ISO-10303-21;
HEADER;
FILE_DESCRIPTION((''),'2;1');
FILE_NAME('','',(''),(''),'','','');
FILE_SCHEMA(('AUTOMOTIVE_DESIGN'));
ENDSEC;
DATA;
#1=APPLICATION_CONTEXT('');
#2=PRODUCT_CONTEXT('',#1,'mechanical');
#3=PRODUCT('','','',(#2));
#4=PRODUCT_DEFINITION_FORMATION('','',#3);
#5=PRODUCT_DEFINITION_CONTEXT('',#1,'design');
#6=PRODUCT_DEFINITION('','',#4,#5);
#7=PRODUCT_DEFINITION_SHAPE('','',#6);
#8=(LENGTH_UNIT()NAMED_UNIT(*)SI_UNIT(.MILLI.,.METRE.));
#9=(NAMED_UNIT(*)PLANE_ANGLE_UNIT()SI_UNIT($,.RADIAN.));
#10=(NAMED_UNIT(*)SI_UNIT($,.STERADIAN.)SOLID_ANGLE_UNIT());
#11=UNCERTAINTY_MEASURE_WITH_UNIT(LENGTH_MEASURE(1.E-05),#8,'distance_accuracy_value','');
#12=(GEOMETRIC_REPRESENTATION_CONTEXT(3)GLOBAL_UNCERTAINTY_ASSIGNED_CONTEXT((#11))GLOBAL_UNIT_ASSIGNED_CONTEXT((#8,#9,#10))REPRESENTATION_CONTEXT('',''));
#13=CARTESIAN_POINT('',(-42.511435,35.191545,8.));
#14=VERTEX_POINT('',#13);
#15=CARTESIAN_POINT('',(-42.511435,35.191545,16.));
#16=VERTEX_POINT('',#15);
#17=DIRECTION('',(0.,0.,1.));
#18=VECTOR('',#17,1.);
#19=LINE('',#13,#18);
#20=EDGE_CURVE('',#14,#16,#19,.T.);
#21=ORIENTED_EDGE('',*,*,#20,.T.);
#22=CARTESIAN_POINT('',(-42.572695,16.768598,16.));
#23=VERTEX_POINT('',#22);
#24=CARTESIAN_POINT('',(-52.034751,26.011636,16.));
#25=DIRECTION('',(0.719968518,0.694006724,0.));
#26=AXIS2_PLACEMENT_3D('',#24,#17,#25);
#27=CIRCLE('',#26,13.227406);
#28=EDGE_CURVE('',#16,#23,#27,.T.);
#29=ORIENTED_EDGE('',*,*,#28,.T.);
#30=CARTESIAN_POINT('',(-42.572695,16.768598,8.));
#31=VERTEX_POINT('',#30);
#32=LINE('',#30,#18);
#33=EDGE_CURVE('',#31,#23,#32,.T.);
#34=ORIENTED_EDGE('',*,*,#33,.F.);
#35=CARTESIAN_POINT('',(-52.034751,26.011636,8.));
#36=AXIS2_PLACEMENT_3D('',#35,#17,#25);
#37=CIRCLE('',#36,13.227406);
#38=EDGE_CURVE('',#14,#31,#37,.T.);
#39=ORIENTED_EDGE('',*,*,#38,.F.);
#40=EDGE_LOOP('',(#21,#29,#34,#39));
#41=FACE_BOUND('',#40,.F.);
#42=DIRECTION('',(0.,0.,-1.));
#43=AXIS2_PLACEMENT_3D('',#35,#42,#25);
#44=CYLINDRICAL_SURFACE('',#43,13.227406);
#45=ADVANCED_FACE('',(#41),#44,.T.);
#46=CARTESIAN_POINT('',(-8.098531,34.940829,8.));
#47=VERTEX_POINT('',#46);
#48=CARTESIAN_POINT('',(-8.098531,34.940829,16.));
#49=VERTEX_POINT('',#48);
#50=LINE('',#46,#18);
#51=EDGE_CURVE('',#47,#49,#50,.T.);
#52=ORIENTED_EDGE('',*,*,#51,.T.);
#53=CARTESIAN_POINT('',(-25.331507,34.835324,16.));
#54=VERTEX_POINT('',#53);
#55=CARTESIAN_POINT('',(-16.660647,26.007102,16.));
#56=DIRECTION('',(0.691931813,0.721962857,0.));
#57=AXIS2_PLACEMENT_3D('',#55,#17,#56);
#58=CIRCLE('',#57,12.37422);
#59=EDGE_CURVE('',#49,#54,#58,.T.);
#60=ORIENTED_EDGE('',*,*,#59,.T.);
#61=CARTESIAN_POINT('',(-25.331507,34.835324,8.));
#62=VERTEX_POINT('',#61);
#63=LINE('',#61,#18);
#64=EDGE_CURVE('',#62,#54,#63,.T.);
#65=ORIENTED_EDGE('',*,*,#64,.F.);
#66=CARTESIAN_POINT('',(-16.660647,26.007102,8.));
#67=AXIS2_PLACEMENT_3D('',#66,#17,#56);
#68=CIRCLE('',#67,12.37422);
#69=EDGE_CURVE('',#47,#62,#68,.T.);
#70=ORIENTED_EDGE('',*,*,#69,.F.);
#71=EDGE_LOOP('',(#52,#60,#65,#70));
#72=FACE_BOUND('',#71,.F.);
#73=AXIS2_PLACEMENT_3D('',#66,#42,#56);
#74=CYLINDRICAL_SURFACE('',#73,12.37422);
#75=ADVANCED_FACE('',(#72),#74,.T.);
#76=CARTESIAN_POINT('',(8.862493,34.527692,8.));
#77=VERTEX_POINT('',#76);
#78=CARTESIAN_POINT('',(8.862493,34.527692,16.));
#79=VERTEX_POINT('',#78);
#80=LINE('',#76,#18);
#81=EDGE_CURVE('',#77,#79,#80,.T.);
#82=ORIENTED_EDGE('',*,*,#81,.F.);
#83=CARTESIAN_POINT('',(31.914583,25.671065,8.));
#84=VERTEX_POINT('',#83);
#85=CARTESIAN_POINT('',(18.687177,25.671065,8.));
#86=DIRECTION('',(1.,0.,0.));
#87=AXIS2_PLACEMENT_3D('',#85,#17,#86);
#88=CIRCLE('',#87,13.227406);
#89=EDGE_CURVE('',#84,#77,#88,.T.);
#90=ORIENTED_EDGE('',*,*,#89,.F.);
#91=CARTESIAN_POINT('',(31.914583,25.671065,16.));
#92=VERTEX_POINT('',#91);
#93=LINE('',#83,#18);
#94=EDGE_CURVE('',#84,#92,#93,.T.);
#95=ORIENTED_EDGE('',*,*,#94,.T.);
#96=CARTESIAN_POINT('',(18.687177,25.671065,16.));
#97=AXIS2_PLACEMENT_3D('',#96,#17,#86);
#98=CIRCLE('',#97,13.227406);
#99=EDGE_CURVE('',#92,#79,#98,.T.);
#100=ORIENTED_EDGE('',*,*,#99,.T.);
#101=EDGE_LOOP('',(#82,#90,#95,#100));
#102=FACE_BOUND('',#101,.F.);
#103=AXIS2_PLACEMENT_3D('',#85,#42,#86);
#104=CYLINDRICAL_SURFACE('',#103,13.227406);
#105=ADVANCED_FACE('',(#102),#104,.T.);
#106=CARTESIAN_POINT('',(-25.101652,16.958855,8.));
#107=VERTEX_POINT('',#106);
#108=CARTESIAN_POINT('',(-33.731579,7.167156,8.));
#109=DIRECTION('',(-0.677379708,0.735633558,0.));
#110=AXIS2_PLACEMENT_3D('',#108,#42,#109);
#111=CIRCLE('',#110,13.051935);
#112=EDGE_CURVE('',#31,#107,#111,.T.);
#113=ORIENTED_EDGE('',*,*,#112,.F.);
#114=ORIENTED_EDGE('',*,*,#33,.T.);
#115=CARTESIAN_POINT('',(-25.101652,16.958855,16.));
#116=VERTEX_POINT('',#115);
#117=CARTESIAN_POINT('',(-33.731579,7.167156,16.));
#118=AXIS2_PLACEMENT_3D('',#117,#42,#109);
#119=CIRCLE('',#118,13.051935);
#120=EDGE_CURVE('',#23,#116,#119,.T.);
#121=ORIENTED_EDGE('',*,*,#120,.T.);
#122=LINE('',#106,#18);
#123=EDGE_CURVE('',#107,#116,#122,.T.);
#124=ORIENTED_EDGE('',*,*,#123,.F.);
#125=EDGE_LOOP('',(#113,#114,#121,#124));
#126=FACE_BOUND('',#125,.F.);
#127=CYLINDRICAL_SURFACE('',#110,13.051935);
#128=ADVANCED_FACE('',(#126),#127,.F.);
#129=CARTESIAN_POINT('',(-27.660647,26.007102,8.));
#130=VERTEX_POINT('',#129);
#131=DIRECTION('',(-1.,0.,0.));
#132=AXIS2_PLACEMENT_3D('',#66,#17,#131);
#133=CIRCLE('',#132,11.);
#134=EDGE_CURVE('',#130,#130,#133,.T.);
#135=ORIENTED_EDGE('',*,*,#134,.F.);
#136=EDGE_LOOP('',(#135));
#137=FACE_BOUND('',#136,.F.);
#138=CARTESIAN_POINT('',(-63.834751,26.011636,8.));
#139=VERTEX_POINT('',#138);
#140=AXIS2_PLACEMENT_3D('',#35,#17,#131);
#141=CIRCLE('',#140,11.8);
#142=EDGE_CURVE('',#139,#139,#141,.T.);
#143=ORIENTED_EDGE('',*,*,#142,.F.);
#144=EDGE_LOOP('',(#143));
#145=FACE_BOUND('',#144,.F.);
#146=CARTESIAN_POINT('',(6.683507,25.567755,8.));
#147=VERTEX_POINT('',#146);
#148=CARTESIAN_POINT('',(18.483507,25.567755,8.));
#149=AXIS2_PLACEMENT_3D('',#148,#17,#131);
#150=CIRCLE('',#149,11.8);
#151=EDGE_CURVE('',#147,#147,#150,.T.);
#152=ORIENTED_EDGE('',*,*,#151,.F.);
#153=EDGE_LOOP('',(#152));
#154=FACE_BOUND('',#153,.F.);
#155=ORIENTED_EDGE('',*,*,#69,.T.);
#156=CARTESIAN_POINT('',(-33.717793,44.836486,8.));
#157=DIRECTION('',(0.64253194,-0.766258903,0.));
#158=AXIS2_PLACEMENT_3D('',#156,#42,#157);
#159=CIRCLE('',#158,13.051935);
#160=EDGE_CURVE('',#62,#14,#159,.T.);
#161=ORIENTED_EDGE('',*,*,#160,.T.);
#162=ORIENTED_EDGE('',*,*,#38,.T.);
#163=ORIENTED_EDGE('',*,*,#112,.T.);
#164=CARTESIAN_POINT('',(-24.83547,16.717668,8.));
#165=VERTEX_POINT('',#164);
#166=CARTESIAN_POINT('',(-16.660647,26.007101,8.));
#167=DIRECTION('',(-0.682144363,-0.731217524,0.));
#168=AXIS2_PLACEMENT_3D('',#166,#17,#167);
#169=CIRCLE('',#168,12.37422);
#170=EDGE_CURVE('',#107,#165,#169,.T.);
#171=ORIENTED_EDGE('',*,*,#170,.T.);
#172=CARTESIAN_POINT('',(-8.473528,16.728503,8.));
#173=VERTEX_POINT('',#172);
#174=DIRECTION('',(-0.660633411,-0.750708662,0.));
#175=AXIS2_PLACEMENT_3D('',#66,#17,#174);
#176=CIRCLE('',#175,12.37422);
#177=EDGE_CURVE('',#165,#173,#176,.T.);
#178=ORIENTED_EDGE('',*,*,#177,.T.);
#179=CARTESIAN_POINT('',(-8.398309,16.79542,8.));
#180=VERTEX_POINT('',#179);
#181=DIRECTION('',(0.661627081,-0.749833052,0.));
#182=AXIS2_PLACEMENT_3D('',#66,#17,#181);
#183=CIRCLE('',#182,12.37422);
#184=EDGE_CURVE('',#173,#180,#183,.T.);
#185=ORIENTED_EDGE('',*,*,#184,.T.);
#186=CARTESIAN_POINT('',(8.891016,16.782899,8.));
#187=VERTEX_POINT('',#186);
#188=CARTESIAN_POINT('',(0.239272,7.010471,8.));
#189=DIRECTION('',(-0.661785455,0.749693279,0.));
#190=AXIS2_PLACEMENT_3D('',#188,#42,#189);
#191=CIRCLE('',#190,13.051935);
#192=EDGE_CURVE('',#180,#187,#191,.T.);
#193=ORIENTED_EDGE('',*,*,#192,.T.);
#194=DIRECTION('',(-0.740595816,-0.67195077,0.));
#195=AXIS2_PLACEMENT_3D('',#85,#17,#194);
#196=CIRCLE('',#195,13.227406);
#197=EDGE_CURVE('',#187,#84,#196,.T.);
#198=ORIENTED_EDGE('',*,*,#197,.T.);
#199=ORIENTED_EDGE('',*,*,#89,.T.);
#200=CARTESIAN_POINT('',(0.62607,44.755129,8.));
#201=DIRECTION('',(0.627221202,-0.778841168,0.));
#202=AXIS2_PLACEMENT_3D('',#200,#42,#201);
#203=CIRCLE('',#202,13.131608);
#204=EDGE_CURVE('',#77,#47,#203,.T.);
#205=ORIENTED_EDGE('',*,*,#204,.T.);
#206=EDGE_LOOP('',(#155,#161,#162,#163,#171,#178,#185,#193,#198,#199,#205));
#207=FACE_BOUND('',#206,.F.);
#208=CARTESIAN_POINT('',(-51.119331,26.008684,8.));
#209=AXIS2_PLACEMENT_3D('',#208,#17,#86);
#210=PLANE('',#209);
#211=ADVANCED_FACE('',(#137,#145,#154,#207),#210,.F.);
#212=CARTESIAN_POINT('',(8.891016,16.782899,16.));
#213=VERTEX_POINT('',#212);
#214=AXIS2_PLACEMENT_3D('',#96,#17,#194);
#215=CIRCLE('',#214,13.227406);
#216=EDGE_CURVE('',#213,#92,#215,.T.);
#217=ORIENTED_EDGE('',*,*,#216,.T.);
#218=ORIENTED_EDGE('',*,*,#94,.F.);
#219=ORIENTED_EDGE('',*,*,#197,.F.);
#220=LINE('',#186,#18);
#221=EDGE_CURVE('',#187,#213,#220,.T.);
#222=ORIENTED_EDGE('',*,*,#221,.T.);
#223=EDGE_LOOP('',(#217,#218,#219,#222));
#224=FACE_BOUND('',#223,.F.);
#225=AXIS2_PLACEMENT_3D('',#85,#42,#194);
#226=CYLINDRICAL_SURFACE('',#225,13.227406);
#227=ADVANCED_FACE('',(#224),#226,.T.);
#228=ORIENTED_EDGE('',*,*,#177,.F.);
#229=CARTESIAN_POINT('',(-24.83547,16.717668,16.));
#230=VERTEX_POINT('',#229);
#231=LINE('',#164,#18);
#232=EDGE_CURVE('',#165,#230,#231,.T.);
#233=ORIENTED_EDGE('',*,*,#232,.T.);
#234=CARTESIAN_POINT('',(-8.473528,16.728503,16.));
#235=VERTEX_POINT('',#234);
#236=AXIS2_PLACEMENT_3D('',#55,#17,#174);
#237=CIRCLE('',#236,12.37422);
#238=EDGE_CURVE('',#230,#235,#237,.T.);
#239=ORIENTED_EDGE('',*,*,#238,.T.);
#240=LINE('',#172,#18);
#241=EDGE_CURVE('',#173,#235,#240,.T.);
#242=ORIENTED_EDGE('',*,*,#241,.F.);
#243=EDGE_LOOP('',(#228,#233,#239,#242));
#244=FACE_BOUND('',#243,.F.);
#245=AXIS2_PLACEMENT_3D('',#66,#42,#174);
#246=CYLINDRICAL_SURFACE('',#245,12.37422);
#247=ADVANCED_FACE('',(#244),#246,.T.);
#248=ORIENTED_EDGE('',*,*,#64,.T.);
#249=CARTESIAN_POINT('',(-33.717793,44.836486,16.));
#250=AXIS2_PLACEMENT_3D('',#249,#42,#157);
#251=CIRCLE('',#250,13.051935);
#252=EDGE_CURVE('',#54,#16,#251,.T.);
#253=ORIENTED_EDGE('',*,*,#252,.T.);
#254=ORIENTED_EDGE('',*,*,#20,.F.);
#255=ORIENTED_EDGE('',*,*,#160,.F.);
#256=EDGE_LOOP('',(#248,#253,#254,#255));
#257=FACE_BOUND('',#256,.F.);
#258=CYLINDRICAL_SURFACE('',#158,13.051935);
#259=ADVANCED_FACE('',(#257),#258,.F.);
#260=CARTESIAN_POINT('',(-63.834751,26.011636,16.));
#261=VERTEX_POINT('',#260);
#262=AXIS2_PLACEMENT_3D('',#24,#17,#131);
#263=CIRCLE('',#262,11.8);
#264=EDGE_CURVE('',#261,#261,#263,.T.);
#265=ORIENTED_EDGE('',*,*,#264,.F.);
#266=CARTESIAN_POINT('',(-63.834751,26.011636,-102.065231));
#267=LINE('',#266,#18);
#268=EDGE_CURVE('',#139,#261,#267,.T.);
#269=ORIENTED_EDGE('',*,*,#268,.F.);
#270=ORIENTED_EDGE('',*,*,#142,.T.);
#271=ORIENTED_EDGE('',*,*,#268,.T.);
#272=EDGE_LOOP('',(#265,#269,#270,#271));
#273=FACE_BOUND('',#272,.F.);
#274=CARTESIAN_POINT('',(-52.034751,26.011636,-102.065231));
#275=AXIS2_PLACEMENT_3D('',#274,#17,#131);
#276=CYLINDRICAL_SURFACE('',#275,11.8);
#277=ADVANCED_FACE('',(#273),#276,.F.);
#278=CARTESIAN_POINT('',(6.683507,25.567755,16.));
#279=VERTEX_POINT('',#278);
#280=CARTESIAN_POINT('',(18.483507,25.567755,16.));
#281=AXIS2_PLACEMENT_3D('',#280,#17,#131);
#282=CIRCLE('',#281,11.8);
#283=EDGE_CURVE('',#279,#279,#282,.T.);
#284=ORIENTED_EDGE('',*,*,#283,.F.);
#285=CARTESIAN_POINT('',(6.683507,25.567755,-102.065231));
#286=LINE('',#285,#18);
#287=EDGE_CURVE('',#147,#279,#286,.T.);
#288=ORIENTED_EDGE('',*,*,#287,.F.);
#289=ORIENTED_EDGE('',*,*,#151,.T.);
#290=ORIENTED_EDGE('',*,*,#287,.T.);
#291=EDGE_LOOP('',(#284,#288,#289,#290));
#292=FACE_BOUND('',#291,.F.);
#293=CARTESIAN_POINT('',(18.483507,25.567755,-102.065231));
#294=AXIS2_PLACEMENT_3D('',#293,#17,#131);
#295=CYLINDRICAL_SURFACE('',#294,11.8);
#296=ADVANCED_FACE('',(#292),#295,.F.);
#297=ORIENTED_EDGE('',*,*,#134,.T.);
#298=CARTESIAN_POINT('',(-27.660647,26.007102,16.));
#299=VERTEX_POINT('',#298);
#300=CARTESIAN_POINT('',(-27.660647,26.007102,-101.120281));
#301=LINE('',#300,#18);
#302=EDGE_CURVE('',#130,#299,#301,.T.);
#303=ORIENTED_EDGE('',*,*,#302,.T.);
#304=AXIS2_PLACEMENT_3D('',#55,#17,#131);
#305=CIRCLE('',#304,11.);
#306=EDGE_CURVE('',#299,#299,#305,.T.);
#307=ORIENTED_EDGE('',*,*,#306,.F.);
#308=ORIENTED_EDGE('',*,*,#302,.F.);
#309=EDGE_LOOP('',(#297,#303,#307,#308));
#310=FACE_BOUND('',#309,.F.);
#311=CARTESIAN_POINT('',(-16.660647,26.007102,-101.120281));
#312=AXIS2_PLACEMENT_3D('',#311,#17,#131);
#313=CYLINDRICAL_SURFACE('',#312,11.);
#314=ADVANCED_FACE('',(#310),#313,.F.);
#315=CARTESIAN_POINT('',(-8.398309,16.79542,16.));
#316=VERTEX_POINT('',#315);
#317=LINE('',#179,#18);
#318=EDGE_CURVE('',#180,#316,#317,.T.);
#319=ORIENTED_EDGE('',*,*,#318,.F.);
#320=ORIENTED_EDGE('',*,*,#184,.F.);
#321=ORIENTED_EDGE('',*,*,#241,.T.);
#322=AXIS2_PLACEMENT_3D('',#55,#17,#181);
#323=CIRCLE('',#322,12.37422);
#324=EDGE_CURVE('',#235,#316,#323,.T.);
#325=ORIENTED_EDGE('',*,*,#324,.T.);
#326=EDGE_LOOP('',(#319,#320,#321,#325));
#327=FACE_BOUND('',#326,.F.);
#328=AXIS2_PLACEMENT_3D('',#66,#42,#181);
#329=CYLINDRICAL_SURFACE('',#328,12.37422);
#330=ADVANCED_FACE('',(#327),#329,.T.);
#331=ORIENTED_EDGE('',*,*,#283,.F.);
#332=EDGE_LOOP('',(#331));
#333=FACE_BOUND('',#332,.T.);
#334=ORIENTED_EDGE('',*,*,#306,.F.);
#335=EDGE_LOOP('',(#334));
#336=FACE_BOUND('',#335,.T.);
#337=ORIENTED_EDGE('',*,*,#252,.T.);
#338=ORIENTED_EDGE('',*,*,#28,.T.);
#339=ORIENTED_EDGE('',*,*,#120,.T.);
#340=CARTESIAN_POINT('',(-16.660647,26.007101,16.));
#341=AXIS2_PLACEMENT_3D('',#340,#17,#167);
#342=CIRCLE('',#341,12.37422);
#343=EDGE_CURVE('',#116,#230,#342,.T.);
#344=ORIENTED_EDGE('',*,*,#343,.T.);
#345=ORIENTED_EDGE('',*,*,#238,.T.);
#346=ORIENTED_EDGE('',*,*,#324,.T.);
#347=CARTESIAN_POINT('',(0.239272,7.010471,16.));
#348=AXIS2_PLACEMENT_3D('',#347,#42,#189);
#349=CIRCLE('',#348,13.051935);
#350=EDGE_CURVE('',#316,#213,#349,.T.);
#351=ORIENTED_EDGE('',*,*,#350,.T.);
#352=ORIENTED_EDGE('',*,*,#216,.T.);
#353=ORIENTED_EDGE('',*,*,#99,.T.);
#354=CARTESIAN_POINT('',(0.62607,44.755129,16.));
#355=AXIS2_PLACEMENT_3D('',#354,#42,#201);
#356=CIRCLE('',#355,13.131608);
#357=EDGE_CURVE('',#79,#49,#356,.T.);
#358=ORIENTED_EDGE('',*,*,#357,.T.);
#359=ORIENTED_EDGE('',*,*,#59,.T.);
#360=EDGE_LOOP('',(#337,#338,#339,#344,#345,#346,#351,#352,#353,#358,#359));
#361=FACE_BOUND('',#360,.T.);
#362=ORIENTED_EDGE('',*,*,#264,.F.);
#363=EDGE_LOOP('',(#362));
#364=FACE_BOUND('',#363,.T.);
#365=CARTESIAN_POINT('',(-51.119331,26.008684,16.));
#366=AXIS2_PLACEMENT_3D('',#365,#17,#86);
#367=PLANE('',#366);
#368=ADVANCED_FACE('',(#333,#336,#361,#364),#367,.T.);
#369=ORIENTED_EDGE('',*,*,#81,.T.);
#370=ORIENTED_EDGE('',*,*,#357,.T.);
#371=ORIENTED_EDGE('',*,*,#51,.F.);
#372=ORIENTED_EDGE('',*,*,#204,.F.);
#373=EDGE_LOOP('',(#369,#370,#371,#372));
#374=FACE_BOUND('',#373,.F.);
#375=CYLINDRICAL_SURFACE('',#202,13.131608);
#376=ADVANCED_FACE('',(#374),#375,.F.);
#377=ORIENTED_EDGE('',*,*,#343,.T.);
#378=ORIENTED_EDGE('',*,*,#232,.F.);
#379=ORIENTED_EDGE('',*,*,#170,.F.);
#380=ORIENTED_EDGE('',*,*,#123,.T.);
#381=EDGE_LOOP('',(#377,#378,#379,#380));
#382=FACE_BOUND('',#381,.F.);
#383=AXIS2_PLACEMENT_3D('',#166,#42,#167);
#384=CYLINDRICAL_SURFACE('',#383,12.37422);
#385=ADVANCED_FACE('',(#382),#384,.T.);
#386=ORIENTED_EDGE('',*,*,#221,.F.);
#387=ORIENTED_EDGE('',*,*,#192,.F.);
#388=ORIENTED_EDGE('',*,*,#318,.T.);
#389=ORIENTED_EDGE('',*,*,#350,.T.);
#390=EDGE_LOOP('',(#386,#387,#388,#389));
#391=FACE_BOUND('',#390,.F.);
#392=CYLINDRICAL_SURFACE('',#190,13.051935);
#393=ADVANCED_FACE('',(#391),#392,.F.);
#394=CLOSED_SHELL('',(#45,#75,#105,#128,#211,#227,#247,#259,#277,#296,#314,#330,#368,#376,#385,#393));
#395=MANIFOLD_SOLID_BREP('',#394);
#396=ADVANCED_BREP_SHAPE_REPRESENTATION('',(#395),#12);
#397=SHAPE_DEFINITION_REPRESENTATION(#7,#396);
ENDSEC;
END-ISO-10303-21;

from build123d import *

# Parameters (mm, degrees)
F1_DEPTH = 8
F3_DEPTH = 8
F4_D     = 23.6
F5_D     = 22


# Not quite as in the source:
# - a feature names something its author has since deleted; it is built from what else it names


with BuildPart() as f1:
    # F0 (on Top) → F1 (new body)
    with BuildSketch(Plane.XY):
        with BuildLine():
            ThreePointArc((30.2364596242, 25.5677551031), (18.556965651, 37.3204786398), (6.7314716859, 25.7146705041))
            ThreePointArc((6.7314716859, 25.7146705041), (18.4100473802, 13.8150315665), (30.2364596242, 25.5677551031))
        make_face()
    extrude(amount=F1_DEPTH)

    # F2 (on face) → F3 (join)
    with BuildSketch(Plane.XY.offset(8)):
        with BuildLine():
            ThreePointArc((-42.5114348153, 35.1915450581), (-65.2620832709, 26.0556201481), (-42.5726949965, 16.7685975444))
            ThreePointArc((-42.5726949965, 16.7685975444), (-39.7847972392, 21.021355147), (-38.8073447634, 26.0116364807))
            ThreePointArc((-38.8073447634, 26.0116364807), (-39.7682713179, 30.9611567757), (-42.5114348153, 35.1915450581))
        make_face()
        with BuildLine():
            ThreePointArc((-38.8073447634, 26.0116364807), (-39.7847972392, 21.021355147), (-42.5726949965, 16.7685975444))
            ThreePointArc((-42.5726949965, 16.7685975444), (-33.87370444, 20.218317429), (-25.1016516698, 16.9588551759))
            ThreePointArc((-25.1016516698, 16.9588551759), (-29.0338445102, 25.8480071098), (-25.3315074449, 34.8353238892))
            ThreePointArc((-25.3315074449, 34.8353238892), (-33.9883630197, 31.7873549926), (-42.5114348153, 35.1915450581))
            ThreePointArc((-42.5114348153, 35.1915450581), (-39.7682713179, 30.9611567757), (-38.8073447634, 26.0116364807))
        make_face()
        with BuildLine():
            ThreePointArc((-24.8354704192, 16.7176675443), (-24.9677312973, 16.8391770918), (-25.1016516698, 16.9588551759))
            ThreePointArc((-25.1016516698, 16.9588551759), (-24.9694362403, 16.8372954701), (-24.8354704192, 16.7176675443))
        make_face()
        with BuildLine():
            ThreePointArc((-25.3315074449, 34.8353238892), (-29.0338445102, 25.8480071098), (-25.1016516698, 16.9588551759))
            ThreePointArc((-25.1016516698, 16.9588551759), (-24.9677312973, 16.8391770918), (-24.8354704192, 16.7176675443))
            ThreePointArc((-24.8354704192, 16.7176675443), (-16.6524528686, 13.6328843719), (-8.4735280262, 16.7285025458))
            ThreePointArc((-8.4735280262, 16.7285025458), (-8.4359829057, 16.7620336333), (-8.3983087423, 16.7954196681))
            ThreePointArc((-8.3983087423, 16.7954196681), (-5.3610604956, 20.9632278118), (-4.2864270488, 26.0071017784))
            ThreePointArc((-4.2864270488, 26.0071017784), (-5.2792843636, 30.8636339026), (-8.098530607, 34.9408290832))
            ThreePointArc((-8.098530607, 34.9408290832), (-16.7364042498, 38.381089997), (-25.3315074449, 34.8353238892))
        make_face()
        with BuildLine():
            ThreePointArc((8.8624930635, 34.5276918287), (0.3063045577, 31.6274145181), (-8.098530607, 34.9408290832))
            ThreePointArc((-8.098530607, 34.9408290832), (-5.2792843636, 30.8636339026), (-4.2864270488, 26.0071017784))
            ThreePointArc((-4.2864270488, 26.0071017784), (-5.3610604956, 20.9632278118), (-8.3983087423, 16.7954196681))
            ThreePointArc((-8.3983087423, 16.7954196681), (0.2487240262, 20.0624034029), (8.8910160496, 16.7828993238))
            ThreePointArc((8.8910160496, 16.7828993238), (5.4597887201, 25.6498031441), (8.8624930635, 34.5276918287))
        make_face()
        with BuildLine():
            ThreePointArc((-8.3983087423, 16.7954196681), (-8.4359829057, 16.7620336333), (-8.4735280262, 16.7285025458))
            ThreePointArc((-8.4735280262, 16.7285025458), (-8.4358503291, 16.7618846084), (-8.3983087423, 16.7954196681))
        make_face()
        with BuildLine():
            ThreePointArc((31.9145832669, 25.6710648537), (23.431077599, 38.0185211111), (8.8624930635, 34.5276918287))
            ThreePointArc((8.8624930635, 34.5276918287), (5.4597887201, 25.6498031441), (8.8910160496, 16.7828993238))
            ThreePointArc((8.8910160496, 16.7828993238), (23.4509187507, 13.3312498845), (31.9145832669, 25.6710648537))
        make_face()
    extrude(amount=F3_DEPTH)

    # F4 (through all)
    with Locations(Plane(origin=(0, 0, 0), x_dir=(1, 0, 0), z_dir=(0, 0, -1))):
        with Locations((-52.0347505808, -26.0116364807), (18.4835065156, -25.5677551031)):
            Hole(F4_D / 2)

    # F5 (through all)
    with Locations(Plane(origin=(0, 0, 0), x_dir=(1, 0, 0), z_dir=(0, 0, -1))):
        with Locations((-16.6606471685, -26.0071017784)):
            Hole(F5_D / 2)


solid = f1.part
